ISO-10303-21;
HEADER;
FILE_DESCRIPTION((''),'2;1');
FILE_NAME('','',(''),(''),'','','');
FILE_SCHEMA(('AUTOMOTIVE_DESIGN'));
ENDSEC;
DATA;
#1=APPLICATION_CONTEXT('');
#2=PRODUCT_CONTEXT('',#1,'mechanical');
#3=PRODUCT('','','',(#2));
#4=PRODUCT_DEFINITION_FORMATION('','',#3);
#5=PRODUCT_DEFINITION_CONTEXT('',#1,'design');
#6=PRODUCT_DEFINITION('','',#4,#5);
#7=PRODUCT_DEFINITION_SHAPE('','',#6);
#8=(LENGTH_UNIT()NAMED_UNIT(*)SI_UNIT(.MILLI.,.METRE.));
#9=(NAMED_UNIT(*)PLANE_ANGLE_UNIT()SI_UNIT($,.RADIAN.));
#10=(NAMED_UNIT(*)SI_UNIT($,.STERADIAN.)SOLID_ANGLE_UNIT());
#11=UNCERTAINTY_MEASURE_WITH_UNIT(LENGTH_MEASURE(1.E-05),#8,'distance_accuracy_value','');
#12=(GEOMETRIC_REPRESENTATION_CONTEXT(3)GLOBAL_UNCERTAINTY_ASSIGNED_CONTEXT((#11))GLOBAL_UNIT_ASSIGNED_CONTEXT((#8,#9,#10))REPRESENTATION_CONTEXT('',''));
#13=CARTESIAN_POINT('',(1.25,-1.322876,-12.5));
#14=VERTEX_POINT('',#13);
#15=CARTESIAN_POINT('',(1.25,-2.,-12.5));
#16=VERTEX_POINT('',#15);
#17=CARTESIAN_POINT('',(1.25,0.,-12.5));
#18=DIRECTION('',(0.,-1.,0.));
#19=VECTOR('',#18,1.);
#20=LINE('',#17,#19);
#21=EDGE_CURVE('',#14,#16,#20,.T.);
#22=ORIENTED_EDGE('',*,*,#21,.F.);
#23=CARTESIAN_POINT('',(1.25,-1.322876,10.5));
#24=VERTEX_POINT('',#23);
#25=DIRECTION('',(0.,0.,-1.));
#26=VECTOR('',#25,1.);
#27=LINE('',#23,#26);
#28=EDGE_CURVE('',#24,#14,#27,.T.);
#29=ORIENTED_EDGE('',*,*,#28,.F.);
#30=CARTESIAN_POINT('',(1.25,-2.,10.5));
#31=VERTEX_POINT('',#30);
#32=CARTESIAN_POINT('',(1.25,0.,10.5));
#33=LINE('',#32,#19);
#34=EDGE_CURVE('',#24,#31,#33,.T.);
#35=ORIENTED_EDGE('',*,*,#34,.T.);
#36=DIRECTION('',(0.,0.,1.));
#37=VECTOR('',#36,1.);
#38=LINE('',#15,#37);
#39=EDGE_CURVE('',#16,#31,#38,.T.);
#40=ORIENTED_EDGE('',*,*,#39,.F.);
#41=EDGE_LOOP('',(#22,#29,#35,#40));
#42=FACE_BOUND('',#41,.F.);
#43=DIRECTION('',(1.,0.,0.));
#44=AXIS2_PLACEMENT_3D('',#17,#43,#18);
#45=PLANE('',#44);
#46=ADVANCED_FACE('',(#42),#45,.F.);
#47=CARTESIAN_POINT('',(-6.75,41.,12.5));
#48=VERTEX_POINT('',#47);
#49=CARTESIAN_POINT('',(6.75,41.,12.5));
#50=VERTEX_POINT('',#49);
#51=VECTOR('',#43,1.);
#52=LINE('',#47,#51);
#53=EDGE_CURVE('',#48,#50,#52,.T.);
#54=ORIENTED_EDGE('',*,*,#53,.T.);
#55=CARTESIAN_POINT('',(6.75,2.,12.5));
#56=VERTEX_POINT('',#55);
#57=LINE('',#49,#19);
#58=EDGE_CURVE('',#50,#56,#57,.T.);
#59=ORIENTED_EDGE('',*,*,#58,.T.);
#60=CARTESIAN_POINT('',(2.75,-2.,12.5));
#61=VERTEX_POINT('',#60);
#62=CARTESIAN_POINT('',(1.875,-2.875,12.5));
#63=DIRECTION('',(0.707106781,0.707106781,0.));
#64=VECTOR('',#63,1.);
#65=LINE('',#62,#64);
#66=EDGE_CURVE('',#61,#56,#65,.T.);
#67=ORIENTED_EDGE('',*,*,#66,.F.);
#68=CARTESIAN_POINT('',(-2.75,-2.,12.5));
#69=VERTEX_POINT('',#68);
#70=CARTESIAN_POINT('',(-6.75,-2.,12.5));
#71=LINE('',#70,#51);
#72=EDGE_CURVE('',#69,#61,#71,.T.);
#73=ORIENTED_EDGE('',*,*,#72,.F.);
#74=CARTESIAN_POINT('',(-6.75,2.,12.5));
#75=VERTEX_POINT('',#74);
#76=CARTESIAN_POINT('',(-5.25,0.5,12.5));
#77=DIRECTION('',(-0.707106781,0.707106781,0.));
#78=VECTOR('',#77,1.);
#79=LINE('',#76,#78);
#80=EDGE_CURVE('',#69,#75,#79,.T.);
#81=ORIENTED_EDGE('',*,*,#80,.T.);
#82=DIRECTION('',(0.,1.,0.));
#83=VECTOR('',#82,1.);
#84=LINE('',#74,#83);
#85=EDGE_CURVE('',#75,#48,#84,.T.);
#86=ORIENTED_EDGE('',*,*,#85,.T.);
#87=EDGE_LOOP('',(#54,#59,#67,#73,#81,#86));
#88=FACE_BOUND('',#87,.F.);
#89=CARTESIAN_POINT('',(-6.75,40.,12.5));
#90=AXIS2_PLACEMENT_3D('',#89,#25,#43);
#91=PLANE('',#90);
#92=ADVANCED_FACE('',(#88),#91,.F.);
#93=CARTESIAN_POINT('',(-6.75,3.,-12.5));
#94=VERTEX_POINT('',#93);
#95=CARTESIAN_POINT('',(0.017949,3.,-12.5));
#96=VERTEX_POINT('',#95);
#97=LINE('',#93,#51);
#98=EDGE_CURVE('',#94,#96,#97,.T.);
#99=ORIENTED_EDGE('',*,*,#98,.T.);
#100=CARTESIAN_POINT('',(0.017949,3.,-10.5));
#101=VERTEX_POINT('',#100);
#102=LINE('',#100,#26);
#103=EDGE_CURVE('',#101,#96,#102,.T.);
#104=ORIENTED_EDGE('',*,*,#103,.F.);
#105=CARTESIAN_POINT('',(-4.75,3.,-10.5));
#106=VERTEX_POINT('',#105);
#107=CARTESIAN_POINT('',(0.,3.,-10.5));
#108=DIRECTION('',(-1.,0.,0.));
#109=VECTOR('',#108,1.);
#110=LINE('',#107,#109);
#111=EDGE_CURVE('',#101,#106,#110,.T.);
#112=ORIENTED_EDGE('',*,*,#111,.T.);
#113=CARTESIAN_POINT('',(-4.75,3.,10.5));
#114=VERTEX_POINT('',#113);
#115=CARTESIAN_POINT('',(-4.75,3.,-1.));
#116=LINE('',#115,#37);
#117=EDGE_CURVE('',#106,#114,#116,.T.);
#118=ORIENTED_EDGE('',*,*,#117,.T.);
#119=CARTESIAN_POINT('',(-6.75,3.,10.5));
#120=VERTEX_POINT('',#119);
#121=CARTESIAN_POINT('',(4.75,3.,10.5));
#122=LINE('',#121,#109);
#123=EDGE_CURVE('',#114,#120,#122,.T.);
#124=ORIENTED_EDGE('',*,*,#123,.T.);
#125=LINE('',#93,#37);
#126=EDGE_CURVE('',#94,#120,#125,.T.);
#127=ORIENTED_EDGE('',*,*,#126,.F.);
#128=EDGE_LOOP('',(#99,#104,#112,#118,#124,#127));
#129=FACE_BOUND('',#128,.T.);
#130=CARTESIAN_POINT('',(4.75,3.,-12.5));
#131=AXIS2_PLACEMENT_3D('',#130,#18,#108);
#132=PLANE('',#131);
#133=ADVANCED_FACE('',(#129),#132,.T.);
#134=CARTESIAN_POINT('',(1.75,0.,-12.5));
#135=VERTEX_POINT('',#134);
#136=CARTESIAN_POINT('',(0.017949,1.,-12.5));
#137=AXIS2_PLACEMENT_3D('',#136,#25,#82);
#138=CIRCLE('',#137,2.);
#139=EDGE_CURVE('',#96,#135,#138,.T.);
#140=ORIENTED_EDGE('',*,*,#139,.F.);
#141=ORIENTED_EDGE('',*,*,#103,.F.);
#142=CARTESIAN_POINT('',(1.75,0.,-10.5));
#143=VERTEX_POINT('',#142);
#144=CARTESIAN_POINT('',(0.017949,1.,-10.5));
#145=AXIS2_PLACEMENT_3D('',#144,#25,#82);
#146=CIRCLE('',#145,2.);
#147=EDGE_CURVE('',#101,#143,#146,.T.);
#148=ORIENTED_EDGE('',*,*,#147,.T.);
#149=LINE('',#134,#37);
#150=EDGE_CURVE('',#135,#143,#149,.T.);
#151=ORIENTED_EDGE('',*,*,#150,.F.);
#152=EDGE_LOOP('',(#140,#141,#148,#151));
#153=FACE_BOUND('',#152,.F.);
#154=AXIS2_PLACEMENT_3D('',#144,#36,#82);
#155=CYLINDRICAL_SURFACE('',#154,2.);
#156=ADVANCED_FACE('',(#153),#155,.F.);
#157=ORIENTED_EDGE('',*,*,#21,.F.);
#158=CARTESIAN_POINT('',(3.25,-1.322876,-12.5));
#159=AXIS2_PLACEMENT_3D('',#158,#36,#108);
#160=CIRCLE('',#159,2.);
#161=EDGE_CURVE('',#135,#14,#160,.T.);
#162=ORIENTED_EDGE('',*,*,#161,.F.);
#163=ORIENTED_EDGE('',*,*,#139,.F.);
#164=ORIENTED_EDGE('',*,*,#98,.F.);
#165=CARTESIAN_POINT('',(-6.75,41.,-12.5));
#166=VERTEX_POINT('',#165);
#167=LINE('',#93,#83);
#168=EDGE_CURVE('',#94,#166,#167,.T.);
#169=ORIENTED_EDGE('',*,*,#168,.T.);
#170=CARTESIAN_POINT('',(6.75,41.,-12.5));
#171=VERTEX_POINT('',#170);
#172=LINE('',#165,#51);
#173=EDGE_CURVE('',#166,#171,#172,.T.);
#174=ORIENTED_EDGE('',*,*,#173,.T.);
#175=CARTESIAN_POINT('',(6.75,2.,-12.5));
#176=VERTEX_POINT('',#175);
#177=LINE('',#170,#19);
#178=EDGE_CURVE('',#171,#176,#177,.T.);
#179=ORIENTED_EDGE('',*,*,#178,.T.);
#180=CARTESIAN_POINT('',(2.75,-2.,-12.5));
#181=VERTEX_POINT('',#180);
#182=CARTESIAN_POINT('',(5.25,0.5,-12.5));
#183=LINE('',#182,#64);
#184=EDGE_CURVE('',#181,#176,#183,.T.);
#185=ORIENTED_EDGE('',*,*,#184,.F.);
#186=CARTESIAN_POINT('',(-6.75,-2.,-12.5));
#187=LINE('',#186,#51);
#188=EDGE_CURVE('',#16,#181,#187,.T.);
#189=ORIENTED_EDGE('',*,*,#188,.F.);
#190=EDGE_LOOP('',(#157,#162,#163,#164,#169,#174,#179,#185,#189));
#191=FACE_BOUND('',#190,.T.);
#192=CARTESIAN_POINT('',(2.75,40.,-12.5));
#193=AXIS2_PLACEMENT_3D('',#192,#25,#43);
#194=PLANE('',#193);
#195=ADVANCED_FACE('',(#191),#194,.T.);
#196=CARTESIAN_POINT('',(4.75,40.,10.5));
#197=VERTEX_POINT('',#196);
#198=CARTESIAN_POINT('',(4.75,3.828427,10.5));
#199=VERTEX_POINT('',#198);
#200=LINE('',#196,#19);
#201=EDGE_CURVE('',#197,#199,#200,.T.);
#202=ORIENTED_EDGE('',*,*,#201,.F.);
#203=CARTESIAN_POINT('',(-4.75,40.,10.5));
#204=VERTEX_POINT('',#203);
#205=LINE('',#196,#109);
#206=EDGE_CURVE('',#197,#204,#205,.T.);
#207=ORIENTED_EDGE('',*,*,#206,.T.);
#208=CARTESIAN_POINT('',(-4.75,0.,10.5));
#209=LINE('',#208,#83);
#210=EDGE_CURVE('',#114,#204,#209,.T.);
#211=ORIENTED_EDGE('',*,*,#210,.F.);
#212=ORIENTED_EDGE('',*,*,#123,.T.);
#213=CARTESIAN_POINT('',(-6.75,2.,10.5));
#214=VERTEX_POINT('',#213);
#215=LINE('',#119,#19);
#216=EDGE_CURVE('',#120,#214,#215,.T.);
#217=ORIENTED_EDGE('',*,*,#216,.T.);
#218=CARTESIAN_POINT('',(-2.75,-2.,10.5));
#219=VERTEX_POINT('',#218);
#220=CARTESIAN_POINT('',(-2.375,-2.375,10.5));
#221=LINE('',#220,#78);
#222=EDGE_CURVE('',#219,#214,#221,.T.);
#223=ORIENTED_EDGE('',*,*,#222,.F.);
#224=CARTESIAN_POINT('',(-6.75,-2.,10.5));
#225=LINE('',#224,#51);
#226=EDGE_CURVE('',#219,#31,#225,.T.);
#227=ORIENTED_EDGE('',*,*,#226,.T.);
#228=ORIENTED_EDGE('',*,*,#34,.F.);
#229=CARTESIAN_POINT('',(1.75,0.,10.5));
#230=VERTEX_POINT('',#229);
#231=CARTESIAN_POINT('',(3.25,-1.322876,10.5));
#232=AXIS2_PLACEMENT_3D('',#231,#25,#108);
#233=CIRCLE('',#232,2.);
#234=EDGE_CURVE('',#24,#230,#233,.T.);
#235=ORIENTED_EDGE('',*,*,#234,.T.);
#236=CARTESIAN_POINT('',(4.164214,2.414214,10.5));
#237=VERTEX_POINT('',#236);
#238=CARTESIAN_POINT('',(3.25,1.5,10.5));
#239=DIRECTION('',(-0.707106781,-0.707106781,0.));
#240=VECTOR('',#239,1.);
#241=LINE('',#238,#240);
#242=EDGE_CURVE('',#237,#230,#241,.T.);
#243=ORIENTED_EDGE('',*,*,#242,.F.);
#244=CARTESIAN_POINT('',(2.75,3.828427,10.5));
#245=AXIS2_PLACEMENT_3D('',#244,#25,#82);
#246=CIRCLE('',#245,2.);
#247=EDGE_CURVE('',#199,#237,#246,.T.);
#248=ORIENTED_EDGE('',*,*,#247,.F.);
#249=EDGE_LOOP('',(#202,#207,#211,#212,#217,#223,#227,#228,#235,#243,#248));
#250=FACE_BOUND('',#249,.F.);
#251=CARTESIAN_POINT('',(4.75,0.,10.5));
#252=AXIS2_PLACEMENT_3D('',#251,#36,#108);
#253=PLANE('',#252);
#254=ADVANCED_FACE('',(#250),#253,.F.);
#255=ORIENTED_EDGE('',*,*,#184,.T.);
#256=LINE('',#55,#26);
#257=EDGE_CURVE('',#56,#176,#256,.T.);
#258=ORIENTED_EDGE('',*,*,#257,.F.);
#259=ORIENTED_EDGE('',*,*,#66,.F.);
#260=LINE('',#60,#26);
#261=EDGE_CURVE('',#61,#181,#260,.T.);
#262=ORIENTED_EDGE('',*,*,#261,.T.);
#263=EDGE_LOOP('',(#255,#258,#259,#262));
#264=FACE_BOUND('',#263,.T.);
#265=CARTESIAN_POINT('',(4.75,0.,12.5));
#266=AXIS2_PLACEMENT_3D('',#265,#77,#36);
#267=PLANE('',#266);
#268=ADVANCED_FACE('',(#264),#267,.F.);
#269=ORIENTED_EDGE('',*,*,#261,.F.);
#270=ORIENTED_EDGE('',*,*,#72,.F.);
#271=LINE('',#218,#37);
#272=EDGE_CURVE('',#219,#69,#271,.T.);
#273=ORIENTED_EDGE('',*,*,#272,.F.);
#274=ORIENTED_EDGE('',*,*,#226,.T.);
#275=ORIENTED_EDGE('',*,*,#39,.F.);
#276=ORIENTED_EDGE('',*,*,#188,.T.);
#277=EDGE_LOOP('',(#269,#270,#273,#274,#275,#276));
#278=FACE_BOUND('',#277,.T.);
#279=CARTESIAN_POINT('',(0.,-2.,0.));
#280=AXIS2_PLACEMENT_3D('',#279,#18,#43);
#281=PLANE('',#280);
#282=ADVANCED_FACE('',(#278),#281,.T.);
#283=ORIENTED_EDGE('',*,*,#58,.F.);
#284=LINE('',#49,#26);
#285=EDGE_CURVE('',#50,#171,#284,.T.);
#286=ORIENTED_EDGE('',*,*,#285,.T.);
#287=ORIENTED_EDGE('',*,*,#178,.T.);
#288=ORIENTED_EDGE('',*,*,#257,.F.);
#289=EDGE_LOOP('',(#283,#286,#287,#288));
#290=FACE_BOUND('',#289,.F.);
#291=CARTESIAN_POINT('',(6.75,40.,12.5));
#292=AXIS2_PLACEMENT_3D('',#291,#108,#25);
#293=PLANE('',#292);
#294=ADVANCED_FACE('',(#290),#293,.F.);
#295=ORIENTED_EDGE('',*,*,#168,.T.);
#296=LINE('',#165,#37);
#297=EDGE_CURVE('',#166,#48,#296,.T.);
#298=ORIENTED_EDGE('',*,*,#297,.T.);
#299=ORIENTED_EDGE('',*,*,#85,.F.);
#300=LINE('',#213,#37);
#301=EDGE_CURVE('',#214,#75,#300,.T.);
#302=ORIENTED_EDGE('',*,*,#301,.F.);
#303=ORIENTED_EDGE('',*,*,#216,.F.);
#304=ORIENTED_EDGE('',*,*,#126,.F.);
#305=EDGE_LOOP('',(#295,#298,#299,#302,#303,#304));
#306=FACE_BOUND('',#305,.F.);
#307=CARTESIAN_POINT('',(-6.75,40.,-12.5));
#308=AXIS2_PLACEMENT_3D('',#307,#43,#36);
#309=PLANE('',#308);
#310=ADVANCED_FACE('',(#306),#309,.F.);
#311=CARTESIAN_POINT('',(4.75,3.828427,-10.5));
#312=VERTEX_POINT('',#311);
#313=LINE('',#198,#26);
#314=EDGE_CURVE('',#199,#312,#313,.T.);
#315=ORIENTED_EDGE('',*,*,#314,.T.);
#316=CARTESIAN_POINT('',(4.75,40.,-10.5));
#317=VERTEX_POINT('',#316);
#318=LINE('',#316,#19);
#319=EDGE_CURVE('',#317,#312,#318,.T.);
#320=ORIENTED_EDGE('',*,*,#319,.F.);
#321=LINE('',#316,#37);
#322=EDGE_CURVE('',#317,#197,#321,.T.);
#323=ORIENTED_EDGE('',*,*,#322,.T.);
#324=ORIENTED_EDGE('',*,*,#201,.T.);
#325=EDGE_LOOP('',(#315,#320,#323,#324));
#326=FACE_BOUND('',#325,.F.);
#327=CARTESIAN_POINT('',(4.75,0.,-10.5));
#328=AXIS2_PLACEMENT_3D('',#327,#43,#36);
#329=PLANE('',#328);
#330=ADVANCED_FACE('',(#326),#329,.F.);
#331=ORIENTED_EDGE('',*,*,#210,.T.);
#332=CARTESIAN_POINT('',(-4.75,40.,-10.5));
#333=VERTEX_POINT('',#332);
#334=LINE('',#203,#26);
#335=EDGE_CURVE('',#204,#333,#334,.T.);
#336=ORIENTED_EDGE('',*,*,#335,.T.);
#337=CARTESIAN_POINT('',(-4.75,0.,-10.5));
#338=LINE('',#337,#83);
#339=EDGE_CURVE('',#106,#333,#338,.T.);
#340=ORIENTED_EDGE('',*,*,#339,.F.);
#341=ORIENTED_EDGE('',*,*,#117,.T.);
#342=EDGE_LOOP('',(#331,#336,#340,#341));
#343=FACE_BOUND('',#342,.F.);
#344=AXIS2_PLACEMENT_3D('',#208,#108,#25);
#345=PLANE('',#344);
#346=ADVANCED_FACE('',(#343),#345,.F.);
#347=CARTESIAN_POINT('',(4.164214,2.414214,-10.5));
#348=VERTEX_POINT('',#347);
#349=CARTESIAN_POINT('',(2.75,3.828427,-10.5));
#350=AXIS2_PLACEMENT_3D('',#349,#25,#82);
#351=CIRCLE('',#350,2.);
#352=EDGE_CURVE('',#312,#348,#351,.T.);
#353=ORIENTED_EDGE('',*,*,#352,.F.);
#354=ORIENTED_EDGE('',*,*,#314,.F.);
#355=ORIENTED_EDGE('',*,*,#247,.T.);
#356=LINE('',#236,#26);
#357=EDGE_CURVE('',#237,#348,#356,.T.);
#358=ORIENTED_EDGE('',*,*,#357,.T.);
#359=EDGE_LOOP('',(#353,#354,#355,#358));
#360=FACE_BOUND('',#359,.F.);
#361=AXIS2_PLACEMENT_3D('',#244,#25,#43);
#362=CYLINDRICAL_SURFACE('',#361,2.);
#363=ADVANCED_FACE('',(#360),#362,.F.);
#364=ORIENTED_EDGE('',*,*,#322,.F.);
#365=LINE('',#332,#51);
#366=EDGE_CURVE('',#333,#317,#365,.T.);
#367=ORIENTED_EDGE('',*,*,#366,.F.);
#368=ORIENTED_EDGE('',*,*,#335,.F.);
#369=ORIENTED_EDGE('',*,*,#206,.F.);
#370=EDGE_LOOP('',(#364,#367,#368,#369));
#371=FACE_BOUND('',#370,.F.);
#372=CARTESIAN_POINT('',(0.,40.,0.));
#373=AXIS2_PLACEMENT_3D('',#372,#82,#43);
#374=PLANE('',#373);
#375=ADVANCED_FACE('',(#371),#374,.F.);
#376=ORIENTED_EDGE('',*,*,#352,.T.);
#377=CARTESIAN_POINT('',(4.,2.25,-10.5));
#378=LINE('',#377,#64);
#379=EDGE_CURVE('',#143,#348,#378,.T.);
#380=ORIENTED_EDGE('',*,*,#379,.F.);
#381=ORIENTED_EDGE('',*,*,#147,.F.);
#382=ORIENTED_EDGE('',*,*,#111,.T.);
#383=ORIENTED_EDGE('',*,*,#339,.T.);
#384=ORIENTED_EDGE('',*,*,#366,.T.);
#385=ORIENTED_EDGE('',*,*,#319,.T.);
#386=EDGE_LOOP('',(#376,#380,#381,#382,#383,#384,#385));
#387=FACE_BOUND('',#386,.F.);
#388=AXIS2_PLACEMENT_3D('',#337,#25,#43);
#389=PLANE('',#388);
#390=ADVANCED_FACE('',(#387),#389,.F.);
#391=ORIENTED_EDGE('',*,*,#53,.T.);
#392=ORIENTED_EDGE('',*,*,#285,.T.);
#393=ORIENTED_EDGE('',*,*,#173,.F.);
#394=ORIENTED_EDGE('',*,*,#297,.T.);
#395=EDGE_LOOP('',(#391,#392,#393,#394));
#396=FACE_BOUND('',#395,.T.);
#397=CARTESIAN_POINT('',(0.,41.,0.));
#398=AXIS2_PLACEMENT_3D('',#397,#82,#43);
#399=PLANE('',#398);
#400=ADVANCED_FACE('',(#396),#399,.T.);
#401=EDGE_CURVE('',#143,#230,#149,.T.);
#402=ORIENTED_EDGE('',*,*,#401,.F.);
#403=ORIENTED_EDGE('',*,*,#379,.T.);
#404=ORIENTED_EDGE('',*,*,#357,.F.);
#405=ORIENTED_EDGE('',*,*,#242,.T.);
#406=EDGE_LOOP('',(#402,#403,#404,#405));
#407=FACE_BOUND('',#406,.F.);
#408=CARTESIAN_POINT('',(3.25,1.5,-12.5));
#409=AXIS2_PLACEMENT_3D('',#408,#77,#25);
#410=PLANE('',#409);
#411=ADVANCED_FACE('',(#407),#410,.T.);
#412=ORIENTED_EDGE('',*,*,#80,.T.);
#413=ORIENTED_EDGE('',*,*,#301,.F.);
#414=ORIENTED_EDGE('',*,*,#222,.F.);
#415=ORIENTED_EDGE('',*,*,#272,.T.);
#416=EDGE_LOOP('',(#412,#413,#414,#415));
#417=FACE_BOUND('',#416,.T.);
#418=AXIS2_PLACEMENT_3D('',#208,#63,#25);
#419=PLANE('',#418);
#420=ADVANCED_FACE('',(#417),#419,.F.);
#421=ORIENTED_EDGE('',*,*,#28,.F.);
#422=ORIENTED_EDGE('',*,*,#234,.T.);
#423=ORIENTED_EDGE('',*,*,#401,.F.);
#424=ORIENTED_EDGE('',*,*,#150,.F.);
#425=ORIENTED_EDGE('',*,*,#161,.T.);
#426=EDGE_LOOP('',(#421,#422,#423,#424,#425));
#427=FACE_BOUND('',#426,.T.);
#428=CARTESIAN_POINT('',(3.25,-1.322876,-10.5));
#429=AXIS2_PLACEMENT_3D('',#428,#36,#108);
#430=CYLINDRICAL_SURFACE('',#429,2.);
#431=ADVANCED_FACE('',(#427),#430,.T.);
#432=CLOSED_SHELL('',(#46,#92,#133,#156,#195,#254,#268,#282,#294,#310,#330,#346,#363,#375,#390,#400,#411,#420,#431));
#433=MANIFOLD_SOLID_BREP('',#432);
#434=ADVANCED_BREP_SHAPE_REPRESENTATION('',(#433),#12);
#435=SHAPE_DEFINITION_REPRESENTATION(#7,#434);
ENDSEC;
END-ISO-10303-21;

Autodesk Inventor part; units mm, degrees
ref_plane "YZ Plane" through (0, 0, 0) normal (1, 0, 0) x (0, 1, 0)
ref_plane "XZ Plane" through (0, 0, 0) normal (0, 1, 0) x (-1, 0, 0)
ref_plane "XY Plane" through (0, 0, 0) normal (0, 0, 1) x (1, 0, 0)
sketch "Skizze1" plane through (0, 0, 0) normal (0, 1, 0) x (-1, 0, 0)
  line L0 (4.75, -10.5) -> (-4.75, -10.5)
  line L1 (-4.75, -10.5) -> (-4.75, 10.5)
  line L2 (-4.75, 10.5) -> (4.75, 10.5)
  line L3 (4.75, 10.5) -> (4.75, -10.5)
  line L4 (4.75, -10.5) -> (-4.75, 10.5) construction
  line L5 (-4.75, -10.5) -> (4.75, 10.5) construction
  line L6 (-6.75, -12.5) -> (6.75, -12.5)
  line L7 (6.75, -12.5) -> (6.75, 12.5)
  line L8 (6.75, 12.5) -> (-6.75, 12.5)
  line L9 (-6.75, 12.5) -> (-6.75, -12.5)
  line L10 (-6.75, -12.5) -> (6.75, 12.5) construction
  line L11 (6.75, -12.5) -> (-6.75, 12.5) construction
  point P0 (0, 0)
  dimension "d0" = 9.5
  dimension "d1" = 21
  dimension "d2" = 2
  dimension "d3" = 2
extrude "Extrusion1" add sketch "Skizze1" along normal blind 40
sketch "Skizze2" plane through (0, 0, 0) normal (0, -1, 0) x (1, 0, 0)
  line L0 (6.75, 12.5) -> (6.75, -12.5) projected
  line L1 (-6.75, 12.5) -> (6.75, 12.5) projected
  line L2 (-6.75, -12.5) -> (-6.75, 12.5) projected
  line L3 (-6.75, -12.5) -> (6.75, -12.5)
  line L4 (6.75, -12.5) -> (6.75, 12.5)
  line L5 (6.75, 12.5) -> (-6.75, 12.5)
  line L6 (-6.75, 12.5) -> (-6.75, -12.5)
  line L7 (-6.75, -12.5) -> (6.75, 12.5) construction
  line L8 (6.75, -12.5) -> (-6.75, 12.5) construction
  point P0 (0, 0)
extrude "Extrusion2" add sketch "Skizze2" along normal blind 2
sketch "Skizze3" plane through (6.75, 40, -12.5) normal (0, 0, -1) x (-1, 0, 0)
  line L0 (11.5, -40) -> (11.5, 0) projected
  line L1 (2, -40) -> (2, 0) projected
  line L2 (11.5, -40) -> (2, -40)
  line L3 (2, -40) -> (2, -37)
  line L4 (2, -37) -> (11.5, -37)
  line L5 (11.5, -37) -> (11.5, -40)
  line L6 (13.5, -42) -> (0, -42) projected
  line L7 (11.5, -37) -> (13.5, -37)
  line L8 (13.5, -37) -> (13.5, -42)
  line L9 (13.5, -42) -> (11.5, -42)
  line L10 (11.5, -42) -> (11.5, -37)
  line L11 (11.5, -40) -> (11.5, 0) projected
  line L12 (11.5, -40) -> (5.5, -40)
  line L13 (5.5, -40) -> (5.5, -42)
  line L14 (5.5, -42) -> (11.5, -42)
  line L15 (11.5, -42) -> (11.5, -40)
  point P0 (6.75, -40)
  dimension "d8" = 3
  dimension "d9" = 6
extrude "Extrusion3" cut sketch "Skizze3" against normal up to surface (23 mm away)
chamfer "Fase1" distance 3 angle 45 1 edges at (4.75, 0, -1)
chamfer "Fase2" distance 4 angle 45 1 edges at (6.75, -2, 0)
chamfer "Fase3" distance 4 angle 45 1 edges at (-6.75, -2, 11.5)
fillet "Rundung1" radius 2 2 edges at (4.75, 3, -11.5) (1.25, 0, -1)
fillet "Rundung2" radius 2 1 edges at (4.75, 3, 0)
sketch "Skizze4" plane through (0, 40, 0) normal (0, 1, 0) x (1, 0, 0)
  line L0 (2.75, 12.5) -> (6.75, 12.5) projected
  line L1 (-6.75, -12.5) -> (6.75, -12.5)
  line L2 (6.75, -12.5) -> (6.75, 12.5)
  line L3 (6.75, 12.5) -> (-6.75, 12.5)
  line L4 (-6.75, 12.5) -> (-6.75, -12.5)
  line L5 (-6.75, -12.5) -> (6.75, 12.5) construction
  line L6 (6.75, -12.5) -> (-6.75, 12.5) construction
  point P0 (0, 0)
extrude "Extrusion4" add sketch "Skizze4" along normal blind 1
equation "\"G_L\" = 0"
equation "\"G_H\" = 0"
equation "\"G_B\" = 0"
properties part number "BackupBat_Wing" material "GEDA Stahl"
